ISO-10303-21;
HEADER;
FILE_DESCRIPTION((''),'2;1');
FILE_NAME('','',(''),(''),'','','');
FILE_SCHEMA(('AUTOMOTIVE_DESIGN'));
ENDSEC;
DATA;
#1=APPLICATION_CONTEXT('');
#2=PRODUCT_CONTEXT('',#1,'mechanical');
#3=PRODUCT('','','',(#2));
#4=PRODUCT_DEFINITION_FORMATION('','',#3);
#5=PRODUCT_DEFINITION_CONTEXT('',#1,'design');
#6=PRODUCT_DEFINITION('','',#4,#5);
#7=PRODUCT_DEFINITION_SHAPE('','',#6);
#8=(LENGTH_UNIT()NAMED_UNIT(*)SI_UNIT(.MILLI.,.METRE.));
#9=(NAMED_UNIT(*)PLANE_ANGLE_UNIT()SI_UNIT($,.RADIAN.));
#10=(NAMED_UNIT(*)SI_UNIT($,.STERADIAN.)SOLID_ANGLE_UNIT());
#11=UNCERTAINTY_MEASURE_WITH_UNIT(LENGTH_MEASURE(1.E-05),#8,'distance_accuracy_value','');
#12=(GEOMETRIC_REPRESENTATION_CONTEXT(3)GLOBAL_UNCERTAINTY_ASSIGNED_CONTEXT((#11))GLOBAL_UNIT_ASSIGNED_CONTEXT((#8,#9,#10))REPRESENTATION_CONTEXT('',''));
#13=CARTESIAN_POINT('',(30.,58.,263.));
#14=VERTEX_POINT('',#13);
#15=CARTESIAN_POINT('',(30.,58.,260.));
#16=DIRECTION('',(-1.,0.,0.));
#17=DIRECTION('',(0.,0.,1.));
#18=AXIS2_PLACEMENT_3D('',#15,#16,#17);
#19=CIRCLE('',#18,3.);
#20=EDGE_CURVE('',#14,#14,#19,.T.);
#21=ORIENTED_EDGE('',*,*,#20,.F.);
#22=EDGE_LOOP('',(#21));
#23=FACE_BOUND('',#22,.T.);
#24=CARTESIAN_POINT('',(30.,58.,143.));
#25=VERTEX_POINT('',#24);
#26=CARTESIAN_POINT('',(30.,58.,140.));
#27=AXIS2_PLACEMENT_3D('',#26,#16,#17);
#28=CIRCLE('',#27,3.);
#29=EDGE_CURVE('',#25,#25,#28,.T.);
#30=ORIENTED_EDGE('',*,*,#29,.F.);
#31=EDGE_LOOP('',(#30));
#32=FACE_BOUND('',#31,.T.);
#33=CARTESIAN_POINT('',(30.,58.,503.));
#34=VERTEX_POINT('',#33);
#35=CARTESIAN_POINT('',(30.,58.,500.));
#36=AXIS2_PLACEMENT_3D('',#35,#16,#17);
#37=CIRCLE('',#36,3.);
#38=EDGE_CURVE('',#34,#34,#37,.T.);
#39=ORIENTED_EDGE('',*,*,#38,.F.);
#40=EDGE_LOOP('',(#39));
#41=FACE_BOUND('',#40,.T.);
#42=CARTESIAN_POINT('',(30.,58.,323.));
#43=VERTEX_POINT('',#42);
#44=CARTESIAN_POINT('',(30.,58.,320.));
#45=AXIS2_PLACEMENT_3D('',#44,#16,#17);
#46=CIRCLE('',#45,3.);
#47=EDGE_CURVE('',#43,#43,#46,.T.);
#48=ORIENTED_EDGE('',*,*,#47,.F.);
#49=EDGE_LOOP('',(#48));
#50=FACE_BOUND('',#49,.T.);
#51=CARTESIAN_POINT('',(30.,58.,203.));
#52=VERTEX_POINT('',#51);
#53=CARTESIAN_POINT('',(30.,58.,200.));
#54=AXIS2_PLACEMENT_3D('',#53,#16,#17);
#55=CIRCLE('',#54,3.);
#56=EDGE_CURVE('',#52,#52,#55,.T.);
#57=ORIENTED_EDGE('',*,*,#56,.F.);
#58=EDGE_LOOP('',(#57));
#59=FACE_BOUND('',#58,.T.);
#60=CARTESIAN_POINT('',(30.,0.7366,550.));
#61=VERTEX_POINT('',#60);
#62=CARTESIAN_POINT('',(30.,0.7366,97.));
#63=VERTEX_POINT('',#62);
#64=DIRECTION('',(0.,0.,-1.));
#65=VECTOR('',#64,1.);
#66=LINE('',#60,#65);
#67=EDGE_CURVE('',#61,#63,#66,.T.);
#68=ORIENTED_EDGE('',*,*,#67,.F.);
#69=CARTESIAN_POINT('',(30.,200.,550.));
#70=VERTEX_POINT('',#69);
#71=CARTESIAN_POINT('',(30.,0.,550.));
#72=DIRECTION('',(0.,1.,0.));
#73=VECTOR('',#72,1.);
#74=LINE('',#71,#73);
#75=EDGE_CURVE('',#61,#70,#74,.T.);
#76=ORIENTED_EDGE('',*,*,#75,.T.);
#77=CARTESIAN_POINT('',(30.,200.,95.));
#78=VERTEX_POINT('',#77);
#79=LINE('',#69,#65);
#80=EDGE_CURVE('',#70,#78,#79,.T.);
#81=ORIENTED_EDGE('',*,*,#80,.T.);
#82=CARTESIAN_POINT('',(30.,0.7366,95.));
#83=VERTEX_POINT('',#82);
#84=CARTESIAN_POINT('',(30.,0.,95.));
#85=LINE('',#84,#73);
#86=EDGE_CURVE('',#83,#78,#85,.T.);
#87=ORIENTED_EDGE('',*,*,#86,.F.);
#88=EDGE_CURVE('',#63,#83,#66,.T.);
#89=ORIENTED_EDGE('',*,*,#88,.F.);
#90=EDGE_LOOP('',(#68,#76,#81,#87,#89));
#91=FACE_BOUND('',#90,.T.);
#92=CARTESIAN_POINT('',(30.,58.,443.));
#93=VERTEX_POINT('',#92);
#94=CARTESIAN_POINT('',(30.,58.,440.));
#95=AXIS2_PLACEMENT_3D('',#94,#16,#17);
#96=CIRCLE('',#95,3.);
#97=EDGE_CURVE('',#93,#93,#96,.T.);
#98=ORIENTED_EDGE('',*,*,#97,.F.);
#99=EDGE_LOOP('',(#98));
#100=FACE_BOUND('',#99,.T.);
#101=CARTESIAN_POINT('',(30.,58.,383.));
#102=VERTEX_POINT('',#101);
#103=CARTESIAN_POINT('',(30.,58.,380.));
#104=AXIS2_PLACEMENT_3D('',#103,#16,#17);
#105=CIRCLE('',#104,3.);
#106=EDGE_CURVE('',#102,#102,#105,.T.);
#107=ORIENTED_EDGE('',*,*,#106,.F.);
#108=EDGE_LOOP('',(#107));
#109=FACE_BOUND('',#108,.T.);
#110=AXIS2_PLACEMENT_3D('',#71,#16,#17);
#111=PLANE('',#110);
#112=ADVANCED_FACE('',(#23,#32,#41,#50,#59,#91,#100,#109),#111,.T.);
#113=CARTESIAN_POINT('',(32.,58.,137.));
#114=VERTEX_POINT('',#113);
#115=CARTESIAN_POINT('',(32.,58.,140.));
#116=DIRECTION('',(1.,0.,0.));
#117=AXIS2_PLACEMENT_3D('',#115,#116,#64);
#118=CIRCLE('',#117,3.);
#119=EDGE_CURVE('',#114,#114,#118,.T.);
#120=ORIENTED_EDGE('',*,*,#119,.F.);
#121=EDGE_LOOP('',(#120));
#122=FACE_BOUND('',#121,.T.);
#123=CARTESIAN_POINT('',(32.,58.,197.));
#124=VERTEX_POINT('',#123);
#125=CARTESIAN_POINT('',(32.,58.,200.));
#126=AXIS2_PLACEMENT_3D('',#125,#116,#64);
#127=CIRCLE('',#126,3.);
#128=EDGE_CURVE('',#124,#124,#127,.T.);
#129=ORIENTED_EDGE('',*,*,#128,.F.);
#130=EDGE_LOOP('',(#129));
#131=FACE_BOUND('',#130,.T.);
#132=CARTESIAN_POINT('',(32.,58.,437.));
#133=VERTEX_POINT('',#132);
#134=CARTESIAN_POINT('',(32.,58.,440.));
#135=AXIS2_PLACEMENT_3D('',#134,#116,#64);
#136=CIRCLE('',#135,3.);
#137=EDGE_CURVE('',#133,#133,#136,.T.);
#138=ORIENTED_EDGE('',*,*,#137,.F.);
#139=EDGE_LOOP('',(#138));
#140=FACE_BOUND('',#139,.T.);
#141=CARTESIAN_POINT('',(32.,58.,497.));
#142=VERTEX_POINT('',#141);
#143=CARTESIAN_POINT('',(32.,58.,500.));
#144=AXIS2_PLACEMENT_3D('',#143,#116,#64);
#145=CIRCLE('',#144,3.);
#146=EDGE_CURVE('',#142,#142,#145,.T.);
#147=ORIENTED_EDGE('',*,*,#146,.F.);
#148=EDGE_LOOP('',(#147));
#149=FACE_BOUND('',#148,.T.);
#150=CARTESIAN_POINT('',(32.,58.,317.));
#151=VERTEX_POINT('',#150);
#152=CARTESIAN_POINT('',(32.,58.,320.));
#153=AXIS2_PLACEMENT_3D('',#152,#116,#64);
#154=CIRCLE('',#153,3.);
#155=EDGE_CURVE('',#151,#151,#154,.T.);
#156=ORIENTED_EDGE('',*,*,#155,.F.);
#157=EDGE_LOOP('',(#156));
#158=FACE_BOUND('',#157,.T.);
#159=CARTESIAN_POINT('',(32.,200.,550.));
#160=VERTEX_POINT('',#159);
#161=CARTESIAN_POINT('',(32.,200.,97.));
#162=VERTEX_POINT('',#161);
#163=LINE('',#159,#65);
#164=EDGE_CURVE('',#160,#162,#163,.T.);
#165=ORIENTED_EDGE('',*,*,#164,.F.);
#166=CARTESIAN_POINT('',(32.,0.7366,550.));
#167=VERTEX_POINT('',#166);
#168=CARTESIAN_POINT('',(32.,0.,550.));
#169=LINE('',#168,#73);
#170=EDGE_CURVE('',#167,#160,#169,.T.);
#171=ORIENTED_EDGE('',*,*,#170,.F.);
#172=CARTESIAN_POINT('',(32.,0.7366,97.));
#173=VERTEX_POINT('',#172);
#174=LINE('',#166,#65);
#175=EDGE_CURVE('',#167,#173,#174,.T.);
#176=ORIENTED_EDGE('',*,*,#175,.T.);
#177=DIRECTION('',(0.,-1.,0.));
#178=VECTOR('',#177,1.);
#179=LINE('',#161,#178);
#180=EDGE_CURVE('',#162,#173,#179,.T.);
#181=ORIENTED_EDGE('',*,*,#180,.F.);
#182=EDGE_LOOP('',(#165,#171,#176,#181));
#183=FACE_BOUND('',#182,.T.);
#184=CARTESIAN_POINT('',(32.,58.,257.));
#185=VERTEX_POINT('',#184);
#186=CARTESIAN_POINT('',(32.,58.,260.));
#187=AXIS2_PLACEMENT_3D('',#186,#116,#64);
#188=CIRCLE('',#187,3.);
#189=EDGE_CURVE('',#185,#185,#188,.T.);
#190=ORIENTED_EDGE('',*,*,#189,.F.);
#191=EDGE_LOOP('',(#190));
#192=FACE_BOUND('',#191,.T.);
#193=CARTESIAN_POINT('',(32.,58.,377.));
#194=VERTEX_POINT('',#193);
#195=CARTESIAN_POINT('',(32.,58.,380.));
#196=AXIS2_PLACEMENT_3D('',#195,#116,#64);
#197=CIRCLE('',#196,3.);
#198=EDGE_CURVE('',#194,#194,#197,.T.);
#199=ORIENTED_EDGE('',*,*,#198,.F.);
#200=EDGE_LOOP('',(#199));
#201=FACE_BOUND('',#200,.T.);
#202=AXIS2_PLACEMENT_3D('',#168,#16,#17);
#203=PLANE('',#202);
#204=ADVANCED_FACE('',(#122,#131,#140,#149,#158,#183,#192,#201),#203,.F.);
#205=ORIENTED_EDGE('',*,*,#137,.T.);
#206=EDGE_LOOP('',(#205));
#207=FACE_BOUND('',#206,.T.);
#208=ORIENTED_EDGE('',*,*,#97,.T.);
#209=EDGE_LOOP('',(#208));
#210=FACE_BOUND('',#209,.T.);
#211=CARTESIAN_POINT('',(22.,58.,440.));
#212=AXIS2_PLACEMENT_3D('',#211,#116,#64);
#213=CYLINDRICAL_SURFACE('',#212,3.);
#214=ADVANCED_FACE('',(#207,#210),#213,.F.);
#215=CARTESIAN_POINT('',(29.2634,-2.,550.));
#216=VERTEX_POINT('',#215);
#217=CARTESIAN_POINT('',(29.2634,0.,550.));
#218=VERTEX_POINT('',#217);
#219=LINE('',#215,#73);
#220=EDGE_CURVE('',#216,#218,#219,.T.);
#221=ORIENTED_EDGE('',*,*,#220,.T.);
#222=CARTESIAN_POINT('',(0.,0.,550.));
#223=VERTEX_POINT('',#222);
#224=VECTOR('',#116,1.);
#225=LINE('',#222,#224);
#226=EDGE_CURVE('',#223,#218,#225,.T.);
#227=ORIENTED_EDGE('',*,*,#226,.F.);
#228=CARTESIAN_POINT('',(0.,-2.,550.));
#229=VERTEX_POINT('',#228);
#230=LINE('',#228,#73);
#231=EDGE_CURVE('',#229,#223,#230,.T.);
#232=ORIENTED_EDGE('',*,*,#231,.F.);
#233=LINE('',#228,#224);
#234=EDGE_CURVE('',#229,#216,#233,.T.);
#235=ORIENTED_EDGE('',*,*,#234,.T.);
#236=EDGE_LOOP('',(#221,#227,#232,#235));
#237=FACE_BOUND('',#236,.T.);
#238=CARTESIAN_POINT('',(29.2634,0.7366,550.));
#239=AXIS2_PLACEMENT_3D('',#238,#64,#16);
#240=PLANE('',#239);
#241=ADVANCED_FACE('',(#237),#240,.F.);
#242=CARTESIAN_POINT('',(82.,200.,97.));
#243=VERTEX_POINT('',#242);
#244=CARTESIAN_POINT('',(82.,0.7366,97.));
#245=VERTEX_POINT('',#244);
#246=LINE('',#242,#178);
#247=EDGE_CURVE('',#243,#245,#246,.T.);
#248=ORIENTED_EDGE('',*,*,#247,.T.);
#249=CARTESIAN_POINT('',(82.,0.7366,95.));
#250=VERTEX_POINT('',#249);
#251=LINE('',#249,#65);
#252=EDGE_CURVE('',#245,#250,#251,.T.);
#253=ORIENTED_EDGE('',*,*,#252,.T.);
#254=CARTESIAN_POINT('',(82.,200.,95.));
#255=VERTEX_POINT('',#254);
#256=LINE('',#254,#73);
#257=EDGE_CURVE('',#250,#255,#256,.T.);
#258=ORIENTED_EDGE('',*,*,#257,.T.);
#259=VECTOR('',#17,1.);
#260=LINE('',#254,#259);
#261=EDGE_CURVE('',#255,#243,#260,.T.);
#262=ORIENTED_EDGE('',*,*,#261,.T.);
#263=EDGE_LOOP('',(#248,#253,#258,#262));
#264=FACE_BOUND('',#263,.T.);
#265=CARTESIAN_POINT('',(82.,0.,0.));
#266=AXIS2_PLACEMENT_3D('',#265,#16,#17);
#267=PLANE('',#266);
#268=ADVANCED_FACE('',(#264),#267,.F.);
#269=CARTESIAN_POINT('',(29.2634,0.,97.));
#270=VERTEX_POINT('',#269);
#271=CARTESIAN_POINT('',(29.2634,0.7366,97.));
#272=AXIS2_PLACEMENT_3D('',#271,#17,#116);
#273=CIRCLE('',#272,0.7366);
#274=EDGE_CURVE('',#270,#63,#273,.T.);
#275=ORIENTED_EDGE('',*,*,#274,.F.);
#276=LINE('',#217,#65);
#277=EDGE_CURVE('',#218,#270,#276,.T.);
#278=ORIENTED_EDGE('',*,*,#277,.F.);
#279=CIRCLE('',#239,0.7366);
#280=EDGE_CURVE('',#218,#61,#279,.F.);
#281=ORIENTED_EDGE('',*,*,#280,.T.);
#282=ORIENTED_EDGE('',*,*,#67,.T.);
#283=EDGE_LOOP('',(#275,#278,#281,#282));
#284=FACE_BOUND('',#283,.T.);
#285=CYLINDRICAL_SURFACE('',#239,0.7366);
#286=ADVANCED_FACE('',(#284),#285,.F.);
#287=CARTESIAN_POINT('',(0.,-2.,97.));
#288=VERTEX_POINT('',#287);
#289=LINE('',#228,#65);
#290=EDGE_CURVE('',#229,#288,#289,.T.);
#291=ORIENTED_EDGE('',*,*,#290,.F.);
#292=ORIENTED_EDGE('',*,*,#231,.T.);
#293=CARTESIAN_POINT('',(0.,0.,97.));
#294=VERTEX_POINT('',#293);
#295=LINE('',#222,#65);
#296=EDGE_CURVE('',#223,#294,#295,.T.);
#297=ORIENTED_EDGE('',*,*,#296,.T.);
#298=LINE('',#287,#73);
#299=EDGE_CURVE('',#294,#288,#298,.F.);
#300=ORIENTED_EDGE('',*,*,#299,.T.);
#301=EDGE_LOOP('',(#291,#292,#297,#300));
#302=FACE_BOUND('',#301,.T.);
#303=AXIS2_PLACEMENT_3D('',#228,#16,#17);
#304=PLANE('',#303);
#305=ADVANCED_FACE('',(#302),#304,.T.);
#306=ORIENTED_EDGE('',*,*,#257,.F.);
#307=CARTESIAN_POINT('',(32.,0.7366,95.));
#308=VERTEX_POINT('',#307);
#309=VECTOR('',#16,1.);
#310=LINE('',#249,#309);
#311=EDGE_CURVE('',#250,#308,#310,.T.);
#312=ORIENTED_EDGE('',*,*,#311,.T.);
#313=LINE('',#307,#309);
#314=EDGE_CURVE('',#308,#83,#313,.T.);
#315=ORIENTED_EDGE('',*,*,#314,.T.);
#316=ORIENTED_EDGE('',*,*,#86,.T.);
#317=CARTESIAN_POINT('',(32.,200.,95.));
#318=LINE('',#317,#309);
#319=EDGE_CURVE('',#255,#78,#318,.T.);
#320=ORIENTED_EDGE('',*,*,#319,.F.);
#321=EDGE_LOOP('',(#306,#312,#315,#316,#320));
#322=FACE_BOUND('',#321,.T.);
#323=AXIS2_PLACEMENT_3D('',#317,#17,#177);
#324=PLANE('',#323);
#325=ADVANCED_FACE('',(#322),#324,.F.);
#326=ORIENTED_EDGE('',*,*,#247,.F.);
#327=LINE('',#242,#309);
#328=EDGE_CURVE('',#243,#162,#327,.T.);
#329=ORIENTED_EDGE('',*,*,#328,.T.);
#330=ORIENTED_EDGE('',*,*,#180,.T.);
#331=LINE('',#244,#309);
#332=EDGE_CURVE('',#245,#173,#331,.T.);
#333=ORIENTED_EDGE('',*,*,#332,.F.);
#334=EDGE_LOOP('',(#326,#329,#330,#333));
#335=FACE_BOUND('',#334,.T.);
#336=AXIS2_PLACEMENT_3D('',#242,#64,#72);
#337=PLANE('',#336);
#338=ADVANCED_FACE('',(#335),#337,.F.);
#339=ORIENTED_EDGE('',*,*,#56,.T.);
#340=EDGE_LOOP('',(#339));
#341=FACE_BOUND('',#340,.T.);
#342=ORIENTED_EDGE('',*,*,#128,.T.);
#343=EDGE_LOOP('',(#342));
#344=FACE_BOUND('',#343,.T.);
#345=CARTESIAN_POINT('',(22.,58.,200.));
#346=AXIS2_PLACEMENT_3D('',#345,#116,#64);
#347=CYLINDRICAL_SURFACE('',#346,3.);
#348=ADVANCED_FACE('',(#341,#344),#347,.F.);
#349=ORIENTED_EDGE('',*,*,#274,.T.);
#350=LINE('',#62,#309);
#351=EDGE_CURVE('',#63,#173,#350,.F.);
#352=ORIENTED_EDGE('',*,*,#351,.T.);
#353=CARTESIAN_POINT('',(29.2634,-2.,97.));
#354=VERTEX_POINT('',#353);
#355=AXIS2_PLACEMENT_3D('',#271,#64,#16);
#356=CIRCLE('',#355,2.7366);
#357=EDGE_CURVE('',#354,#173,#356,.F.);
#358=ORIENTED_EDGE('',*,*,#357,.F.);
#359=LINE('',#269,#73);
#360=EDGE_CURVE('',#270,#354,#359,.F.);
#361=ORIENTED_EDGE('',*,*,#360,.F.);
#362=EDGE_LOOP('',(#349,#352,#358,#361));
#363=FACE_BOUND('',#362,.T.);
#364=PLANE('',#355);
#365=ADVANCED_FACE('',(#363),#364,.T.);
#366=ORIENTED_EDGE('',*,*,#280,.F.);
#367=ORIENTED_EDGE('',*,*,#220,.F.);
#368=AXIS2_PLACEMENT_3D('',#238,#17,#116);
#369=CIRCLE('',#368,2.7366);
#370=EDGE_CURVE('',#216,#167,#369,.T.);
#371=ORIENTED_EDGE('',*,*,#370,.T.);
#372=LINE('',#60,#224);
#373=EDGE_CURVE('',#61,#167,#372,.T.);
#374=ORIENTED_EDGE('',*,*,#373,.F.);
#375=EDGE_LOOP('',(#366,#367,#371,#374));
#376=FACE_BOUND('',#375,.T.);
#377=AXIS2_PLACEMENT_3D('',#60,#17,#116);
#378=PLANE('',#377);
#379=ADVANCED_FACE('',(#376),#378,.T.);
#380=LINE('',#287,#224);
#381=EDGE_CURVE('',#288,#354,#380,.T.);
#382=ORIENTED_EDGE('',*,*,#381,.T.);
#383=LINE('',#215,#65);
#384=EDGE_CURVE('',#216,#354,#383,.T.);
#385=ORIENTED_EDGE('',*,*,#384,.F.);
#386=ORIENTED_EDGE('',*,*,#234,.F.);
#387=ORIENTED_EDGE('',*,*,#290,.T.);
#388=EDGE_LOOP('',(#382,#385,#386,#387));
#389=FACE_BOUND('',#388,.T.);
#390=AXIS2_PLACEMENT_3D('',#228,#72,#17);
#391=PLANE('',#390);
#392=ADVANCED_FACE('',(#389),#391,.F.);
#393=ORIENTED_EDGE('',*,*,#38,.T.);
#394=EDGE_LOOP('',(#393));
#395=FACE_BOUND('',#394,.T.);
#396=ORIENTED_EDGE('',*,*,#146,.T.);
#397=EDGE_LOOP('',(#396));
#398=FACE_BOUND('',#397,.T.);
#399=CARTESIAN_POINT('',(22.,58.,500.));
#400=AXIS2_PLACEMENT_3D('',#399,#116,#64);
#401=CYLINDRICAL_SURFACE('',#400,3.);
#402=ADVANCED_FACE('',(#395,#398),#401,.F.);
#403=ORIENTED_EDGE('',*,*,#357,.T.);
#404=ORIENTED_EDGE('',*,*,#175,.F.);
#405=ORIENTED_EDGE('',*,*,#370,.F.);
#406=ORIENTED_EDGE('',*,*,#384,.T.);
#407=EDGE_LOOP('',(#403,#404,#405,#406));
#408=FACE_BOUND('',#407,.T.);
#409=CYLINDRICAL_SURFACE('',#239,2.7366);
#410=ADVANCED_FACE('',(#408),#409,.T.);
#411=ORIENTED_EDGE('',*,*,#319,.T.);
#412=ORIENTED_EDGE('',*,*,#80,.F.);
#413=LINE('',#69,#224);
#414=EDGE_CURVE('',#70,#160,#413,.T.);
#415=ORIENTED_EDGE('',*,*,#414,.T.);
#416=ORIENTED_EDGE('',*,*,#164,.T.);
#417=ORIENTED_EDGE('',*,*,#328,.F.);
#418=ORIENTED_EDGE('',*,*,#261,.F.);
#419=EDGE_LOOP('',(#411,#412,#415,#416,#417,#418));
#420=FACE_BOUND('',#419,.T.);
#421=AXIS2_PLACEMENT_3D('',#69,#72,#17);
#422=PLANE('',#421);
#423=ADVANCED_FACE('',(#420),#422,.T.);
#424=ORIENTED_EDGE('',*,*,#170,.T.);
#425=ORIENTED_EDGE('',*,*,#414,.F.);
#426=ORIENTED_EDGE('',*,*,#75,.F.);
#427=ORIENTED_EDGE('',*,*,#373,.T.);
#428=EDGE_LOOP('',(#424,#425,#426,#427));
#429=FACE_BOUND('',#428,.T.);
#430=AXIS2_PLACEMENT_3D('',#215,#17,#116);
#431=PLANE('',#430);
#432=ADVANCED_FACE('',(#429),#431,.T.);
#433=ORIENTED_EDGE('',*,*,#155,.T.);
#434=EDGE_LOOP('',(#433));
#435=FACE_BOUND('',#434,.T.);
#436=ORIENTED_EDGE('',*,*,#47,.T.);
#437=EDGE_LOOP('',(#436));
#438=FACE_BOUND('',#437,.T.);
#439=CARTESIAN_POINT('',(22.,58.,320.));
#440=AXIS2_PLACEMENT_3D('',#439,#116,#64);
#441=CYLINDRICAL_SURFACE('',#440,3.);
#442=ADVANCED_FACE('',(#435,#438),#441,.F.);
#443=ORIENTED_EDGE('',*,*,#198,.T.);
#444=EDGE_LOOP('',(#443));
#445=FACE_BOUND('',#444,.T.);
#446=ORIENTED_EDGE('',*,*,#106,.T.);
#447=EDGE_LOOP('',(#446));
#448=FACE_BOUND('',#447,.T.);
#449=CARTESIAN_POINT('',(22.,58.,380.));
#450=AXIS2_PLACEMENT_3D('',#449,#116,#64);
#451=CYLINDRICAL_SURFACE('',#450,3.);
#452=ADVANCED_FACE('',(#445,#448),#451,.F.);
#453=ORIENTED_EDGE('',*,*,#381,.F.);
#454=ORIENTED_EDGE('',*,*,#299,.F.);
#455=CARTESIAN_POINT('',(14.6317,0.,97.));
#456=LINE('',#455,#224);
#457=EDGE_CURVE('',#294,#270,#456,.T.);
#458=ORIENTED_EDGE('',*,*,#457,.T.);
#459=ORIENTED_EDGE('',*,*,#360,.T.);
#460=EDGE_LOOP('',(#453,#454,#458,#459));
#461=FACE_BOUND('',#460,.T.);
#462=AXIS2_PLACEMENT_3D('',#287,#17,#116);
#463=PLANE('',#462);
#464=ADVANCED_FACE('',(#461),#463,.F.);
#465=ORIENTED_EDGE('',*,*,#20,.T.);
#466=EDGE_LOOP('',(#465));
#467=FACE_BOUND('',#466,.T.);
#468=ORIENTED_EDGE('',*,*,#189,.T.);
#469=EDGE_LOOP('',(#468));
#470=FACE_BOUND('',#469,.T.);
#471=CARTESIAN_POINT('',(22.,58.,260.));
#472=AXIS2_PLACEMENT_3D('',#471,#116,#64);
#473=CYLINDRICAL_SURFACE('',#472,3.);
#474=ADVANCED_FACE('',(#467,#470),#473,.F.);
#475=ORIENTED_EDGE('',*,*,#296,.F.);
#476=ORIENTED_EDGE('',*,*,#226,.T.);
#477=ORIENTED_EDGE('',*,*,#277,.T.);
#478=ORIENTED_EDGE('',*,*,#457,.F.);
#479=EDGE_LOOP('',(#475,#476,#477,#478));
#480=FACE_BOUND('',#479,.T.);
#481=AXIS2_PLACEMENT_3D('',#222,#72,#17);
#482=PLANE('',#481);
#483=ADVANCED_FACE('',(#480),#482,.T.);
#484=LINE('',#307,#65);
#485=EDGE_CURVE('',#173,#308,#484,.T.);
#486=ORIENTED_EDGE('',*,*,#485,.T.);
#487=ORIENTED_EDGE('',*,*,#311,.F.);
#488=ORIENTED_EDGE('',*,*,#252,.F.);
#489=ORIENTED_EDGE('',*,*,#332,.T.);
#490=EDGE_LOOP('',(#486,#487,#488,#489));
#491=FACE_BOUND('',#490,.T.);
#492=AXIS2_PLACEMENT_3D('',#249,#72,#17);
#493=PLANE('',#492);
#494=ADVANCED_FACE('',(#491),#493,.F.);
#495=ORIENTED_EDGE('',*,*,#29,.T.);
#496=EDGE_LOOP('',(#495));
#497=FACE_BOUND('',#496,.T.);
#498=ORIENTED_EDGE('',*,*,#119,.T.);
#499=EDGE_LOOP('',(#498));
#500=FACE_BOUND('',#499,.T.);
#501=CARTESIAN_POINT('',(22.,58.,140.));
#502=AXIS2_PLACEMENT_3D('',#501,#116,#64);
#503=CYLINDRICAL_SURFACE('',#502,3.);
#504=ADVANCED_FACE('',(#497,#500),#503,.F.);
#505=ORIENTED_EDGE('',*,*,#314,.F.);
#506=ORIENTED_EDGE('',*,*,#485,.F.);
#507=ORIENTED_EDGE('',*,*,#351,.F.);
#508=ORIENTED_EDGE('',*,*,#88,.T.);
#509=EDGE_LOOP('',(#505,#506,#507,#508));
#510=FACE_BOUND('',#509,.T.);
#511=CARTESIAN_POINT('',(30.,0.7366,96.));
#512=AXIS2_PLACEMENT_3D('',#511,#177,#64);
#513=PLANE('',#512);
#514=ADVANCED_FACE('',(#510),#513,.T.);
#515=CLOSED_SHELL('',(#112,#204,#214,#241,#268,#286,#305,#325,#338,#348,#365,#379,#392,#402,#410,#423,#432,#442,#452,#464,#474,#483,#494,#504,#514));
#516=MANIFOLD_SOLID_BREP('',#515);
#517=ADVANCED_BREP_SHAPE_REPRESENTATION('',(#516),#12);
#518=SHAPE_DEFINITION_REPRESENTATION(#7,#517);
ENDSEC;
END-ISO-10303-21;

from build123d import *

# Parameters (mm, degrees)
BASE_FLANGE1_DEPTH      = 550
SKETCH10_R              = 3
CUT_EXTRUDE2_DEPTH      = 10
CUT_EXTRUDE3_DEPTH      = 587.003412959
CUT_EXTRUDE3_DEPTH_BACK = 587.003412959
SKETCH15_W              = 2
SKETCH15_H              = 199.2634
BOSS_EXTRUDE2_DEPTH     = 50
SKETCH16_W              = 32
SKETCH16_H              = 2
CUT_EXTRUDE4_DEPTH      = 2.7366


# Sheet-metal steps are written as plain solids
with BuildPart() as part:
    # Sketch1 → Base-Flange1 (new body)
    with BuildSketch(Plane.XY):
        with BuildLine():
            Line((0, 0), (29.2634, 0))
            ThreePointArc((29.2634, 0), (29.784254855, 0.215745145), (30, 0.7366))
            Line((30, 0.7366), (30, 200))
            Line((30, 200), (32, 200))
            Line((32, 200), (32, 0.7366))
            ThreePointArc((32, 0.7366), (31.198468417, -1.198468417), (29.2634, -2))
            Line((29.2634, -2), (0, -2))
            Line((0, -2), (0, 0))
        make_face()
    extrude(amount=BASE_FLANGE1_DEPTH)

    # Sketch10 → Cut-Extrude2 (cut)
    with BuildSketch(Plane(origin=(32, 0, 0), x_dir=(0, 0, -1), z_dir=(1, 0, 0))):
        with Locations((-500, 58)):
            Circle(SKETCH10_R)
        with Locations((-440, 58)):
            Circle(SKETCH10_R)
        with Locations((-380, 58)):
            Circle(SKETCH10_R)
        with Locations((-320, 58)):
            Circle(SKETCH10_R)
        with Locations((-260, 58)):
            Circle(SKETCH10_R)
        with Locations((-200, 58)):
            Circle(SKETCH10_R)
        with Locations((-140, 58)):
            Circle(SKETCH10_R)
    extrude(amount=-CUT_EXTRUDE2_DEPTH, mode=Mode.SUBTRACT)

    # Sketch11 → Cut-Extrude3 (cut, two sides: drawn at the far end of the back side and taken through both)
    with BuildSketch(Plane.ZY.offset(-30).offset(-CUT_EXTRUDE3_DEPTH_BACK)):
        Polygon((0, 200), (95, 200), (95, 0.7366), (95, -11.499359117), (0, -11.499359117), (0, 0.7366), align=None)
    extrude(amount=CUT_EXTRUDE3_DEPTH + CUT_EXTRUDE3_DEPTH_BACK, mode=Mode.SUBTRACT)

    # Sketch15 → Boss-Extrude2 (add)
    with BuildSketch(Plane(origin=(32, 0, 0), x_dir=(0, 0, -1), z_dir=(1, 0, 0))):
        with Locations((-96, 100.3683)):
            Rectangle(SKETCH15_W, SKETCH15_H)
    extrude(amount=BOSS_EXTRUDE2_DEPTH)

    # Sketch16 → Cut-Extrude4 (cut)
    with BuildSketch(Plane(origin=(0, -2, 0), x_dir=(-1, 0, 0), z_dir=(0, -1, 0))):
        with Locations((-16, -96)):
            Rectangle(SKETCH16_W, SKETCH16_H)
    extrude(amount=-CUT_EXTRUDE4_DEPTH, mode=Mode.SUBTRACT)


solid = part.part
